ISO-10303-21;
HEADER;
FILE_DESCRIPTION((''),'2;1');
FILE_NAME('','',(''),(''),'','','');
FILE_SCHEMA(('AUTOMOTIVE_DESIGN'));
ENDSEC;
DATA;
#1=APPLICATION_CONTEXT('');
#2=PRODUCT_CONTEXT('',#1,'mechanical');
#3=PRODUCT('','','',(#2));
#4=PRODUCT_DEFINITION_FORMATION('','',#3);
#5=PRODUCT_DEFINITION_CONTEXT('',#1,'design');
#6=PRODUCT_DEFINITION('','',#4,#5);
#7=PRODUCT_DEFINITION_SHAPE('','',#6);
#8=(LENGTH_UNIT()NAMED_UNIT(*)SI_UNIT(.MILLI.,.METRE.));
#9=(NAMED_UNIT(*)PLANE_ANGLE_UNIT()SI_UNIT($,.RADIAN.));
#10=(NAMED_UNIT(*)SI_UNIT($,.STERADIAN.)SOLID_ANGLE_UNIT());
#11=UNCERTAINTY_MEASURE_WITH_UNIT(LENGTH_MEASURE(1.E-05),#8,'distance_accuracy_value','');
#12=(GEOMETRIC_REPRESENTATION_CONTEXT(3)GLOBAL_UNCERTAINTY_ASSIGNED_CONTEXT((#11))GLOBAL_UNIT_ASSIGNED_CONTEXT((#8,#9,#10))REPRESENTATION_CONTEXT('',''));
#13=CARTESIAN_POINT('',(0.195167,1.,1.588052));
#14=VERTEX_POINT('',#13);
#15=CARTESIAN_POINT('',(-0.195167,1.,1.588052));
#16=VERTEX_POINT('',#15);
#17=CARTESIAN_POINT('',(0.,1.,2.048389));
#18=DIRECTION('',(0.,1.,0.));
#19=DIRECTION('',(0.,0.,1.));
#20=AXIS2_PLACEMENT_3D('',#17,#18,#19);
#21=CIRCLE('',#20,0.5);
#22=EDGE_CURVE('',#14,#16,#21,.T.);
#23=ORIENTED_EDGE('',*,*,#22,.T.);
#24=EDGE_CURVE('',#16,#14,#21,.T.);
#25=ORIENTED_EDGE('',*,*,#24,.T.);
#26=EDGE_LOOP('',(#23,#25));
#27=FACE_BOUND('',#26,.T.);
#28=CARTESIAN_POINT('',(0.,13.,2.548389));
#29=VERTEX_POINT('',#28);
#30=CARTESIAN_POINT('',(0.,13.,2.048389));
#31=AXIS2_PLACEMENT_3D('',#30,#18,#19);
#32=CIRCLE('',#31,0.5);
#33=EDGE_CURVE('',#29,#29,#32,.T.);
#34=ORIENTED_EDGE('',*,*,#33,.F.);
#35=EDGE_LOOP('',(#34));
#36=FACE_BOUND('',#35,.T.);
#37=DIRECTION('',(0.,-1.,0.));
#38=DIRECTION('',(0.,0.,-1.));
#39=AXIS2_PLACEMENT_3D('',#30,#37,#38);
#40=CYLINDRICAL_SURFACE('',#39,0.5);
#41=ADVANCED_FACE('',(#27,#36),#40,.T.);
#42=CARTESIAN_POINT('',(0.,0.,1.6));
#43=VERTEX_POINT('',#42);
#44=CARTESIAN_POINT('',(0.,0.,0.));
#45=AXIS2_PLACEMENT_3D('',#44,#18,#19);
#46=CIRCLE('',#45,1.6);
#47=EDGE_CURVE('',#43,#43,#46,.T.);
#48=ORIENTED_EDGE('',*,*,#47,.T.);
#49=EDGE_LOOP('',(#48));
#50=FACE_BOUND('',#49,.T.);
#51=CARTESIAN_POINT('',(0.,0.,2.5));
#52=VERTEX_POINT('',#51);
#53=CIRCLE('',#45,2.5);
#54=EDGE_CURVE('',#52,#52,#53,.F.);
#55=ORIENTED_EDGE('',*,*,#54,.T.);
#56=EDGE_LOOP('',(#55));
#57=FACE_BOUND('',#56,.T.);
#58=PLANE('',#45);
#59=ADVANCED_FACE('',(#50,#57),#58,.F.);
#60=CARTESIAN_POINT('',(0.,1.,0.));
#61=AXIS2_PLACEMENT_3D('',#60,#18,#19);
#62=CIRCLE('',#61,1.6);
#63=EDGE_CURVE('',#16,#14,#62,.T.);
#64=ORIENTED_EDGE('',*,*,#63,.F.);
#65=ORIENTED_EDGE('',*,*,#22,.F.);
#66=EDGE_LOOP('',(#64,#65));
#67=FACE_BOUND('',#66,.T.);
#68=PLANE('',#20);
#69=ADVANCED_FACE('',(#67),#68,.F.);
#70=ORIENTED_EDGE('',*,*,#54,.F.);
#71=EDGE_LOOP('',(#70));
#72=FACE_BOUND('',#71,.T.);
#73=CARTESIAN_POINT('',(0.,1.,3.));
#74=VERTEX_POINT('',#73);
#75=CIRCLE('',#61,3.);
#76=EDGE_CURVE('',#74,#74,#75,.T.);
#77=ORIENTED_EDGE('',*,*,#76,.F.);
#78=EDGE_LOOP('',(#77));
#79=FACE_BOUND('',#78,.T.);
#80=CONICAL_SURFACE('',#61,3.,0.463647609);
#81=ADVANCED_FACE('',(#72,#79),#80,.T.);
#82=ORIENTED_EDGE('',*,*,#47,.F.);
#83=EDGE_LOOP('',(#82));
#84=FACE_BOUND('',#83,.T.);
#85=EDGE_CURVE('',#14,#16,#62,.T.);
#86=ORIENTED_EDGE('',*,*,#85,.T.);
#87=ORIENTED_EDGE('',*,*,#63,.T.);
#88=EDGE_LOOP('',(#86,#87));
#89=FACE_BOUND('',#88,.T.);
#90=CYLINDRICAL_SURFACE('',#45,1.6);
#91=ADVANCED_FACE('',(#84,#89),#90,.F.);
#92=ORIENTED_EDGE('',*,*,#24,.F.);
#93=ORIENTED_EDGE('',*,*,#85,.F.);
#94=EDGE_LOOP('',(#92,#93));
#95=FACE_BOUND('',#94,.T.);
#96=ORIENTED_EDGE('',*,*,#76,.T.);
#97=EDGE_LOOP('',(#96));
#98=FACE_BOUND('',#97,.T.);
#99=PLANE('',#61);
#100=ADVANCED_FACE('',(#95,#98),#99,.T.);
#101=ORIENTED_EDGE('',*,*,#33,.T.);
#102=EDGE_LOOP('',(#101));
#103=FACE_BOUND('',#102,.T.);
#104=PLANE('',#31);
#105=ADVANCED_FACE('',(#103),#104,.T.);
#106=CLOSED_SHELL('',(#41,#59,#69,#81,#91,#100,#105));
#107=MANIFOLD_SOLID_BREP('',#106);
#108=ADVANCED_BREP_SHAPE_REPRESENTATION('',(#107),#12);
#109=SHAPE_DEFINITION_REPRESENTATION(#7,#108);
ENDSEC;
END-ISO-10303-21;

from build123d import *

# Parameters (mm, degrees)
SKETCH1_R           = 3
BOSS_EXTRUDE1_DEPTH = 1
SKETCH2_R           = 1.6
CUT_EXTRUDE1_DEPTH  = 1
SKETCH3_R           = 0.5
BOSS_EXTRUDE2_DEPTH = 12
CHAMFER1_SIZE       = 1
CHAMFER1_SIZE_2     = 0.5


with BuildPart() as part:
    # Sketch1 → Boss-Extrude1 (new body)
    with BuildSketch(Plane(origin=(0, 0, 0), x_dir=(1, 0, 0), z_dir=(0, 1, 0))):
        with Locations(Location((0, 0, 0), (0, 0, 270))):
            Circle(SKETCH1_R)
    extrude(amount=BOSS_EXTRUDE1_DEPTH)

    # Sketch2 → Cut-Extrude1 (cut)
    with BuildSketch(Plane(origin=(0, 1, 0), x_dir=(1, 0, 0), z_dir=(0, 1, 0))):
        with Locations(Location((0, 0, 0), (0, 0, 270))):
            Circle(SKETCH2_R)
    extrude(amount=-CUT_EXTRUDE1_DEPTH, mode=Mode.SUBTRACT)

    # Sketch3 → Boss-Extrude2 (add)
    with BuildSketch(Plane(origin=(0, 1, 0), x_dir=(1, 0, 0), z_dir=(0, 1, 0))):
        with Locations(Location((0, -2.048388822, 0), (0, 0, 112.975296156))):
            Circle(SKETCH3_R)
    extrude(amount=BOSS_EXTRUDE2_DEPTH)

    # Chamfer1
    # the kernel refuses this chamfer: 1, 0.5 mm, written as the material it takes off along each edge
    with BuildSketch(Plane(origin=(0, 0, 0), x_dir=(0, 0, 1), z_dir=(-1, 0, 0))) as chamfer1_piece_1:
        Polygon((3, CHAMFER1_SIZE), (3 - CHAMFER1_SIZE_2, 0), (3, 0), align=None)
    revolve(axis=Axis((0, 0, 0), (0, 1, 0)), mode=Mode.SUBTRACT)


solid = part.part
